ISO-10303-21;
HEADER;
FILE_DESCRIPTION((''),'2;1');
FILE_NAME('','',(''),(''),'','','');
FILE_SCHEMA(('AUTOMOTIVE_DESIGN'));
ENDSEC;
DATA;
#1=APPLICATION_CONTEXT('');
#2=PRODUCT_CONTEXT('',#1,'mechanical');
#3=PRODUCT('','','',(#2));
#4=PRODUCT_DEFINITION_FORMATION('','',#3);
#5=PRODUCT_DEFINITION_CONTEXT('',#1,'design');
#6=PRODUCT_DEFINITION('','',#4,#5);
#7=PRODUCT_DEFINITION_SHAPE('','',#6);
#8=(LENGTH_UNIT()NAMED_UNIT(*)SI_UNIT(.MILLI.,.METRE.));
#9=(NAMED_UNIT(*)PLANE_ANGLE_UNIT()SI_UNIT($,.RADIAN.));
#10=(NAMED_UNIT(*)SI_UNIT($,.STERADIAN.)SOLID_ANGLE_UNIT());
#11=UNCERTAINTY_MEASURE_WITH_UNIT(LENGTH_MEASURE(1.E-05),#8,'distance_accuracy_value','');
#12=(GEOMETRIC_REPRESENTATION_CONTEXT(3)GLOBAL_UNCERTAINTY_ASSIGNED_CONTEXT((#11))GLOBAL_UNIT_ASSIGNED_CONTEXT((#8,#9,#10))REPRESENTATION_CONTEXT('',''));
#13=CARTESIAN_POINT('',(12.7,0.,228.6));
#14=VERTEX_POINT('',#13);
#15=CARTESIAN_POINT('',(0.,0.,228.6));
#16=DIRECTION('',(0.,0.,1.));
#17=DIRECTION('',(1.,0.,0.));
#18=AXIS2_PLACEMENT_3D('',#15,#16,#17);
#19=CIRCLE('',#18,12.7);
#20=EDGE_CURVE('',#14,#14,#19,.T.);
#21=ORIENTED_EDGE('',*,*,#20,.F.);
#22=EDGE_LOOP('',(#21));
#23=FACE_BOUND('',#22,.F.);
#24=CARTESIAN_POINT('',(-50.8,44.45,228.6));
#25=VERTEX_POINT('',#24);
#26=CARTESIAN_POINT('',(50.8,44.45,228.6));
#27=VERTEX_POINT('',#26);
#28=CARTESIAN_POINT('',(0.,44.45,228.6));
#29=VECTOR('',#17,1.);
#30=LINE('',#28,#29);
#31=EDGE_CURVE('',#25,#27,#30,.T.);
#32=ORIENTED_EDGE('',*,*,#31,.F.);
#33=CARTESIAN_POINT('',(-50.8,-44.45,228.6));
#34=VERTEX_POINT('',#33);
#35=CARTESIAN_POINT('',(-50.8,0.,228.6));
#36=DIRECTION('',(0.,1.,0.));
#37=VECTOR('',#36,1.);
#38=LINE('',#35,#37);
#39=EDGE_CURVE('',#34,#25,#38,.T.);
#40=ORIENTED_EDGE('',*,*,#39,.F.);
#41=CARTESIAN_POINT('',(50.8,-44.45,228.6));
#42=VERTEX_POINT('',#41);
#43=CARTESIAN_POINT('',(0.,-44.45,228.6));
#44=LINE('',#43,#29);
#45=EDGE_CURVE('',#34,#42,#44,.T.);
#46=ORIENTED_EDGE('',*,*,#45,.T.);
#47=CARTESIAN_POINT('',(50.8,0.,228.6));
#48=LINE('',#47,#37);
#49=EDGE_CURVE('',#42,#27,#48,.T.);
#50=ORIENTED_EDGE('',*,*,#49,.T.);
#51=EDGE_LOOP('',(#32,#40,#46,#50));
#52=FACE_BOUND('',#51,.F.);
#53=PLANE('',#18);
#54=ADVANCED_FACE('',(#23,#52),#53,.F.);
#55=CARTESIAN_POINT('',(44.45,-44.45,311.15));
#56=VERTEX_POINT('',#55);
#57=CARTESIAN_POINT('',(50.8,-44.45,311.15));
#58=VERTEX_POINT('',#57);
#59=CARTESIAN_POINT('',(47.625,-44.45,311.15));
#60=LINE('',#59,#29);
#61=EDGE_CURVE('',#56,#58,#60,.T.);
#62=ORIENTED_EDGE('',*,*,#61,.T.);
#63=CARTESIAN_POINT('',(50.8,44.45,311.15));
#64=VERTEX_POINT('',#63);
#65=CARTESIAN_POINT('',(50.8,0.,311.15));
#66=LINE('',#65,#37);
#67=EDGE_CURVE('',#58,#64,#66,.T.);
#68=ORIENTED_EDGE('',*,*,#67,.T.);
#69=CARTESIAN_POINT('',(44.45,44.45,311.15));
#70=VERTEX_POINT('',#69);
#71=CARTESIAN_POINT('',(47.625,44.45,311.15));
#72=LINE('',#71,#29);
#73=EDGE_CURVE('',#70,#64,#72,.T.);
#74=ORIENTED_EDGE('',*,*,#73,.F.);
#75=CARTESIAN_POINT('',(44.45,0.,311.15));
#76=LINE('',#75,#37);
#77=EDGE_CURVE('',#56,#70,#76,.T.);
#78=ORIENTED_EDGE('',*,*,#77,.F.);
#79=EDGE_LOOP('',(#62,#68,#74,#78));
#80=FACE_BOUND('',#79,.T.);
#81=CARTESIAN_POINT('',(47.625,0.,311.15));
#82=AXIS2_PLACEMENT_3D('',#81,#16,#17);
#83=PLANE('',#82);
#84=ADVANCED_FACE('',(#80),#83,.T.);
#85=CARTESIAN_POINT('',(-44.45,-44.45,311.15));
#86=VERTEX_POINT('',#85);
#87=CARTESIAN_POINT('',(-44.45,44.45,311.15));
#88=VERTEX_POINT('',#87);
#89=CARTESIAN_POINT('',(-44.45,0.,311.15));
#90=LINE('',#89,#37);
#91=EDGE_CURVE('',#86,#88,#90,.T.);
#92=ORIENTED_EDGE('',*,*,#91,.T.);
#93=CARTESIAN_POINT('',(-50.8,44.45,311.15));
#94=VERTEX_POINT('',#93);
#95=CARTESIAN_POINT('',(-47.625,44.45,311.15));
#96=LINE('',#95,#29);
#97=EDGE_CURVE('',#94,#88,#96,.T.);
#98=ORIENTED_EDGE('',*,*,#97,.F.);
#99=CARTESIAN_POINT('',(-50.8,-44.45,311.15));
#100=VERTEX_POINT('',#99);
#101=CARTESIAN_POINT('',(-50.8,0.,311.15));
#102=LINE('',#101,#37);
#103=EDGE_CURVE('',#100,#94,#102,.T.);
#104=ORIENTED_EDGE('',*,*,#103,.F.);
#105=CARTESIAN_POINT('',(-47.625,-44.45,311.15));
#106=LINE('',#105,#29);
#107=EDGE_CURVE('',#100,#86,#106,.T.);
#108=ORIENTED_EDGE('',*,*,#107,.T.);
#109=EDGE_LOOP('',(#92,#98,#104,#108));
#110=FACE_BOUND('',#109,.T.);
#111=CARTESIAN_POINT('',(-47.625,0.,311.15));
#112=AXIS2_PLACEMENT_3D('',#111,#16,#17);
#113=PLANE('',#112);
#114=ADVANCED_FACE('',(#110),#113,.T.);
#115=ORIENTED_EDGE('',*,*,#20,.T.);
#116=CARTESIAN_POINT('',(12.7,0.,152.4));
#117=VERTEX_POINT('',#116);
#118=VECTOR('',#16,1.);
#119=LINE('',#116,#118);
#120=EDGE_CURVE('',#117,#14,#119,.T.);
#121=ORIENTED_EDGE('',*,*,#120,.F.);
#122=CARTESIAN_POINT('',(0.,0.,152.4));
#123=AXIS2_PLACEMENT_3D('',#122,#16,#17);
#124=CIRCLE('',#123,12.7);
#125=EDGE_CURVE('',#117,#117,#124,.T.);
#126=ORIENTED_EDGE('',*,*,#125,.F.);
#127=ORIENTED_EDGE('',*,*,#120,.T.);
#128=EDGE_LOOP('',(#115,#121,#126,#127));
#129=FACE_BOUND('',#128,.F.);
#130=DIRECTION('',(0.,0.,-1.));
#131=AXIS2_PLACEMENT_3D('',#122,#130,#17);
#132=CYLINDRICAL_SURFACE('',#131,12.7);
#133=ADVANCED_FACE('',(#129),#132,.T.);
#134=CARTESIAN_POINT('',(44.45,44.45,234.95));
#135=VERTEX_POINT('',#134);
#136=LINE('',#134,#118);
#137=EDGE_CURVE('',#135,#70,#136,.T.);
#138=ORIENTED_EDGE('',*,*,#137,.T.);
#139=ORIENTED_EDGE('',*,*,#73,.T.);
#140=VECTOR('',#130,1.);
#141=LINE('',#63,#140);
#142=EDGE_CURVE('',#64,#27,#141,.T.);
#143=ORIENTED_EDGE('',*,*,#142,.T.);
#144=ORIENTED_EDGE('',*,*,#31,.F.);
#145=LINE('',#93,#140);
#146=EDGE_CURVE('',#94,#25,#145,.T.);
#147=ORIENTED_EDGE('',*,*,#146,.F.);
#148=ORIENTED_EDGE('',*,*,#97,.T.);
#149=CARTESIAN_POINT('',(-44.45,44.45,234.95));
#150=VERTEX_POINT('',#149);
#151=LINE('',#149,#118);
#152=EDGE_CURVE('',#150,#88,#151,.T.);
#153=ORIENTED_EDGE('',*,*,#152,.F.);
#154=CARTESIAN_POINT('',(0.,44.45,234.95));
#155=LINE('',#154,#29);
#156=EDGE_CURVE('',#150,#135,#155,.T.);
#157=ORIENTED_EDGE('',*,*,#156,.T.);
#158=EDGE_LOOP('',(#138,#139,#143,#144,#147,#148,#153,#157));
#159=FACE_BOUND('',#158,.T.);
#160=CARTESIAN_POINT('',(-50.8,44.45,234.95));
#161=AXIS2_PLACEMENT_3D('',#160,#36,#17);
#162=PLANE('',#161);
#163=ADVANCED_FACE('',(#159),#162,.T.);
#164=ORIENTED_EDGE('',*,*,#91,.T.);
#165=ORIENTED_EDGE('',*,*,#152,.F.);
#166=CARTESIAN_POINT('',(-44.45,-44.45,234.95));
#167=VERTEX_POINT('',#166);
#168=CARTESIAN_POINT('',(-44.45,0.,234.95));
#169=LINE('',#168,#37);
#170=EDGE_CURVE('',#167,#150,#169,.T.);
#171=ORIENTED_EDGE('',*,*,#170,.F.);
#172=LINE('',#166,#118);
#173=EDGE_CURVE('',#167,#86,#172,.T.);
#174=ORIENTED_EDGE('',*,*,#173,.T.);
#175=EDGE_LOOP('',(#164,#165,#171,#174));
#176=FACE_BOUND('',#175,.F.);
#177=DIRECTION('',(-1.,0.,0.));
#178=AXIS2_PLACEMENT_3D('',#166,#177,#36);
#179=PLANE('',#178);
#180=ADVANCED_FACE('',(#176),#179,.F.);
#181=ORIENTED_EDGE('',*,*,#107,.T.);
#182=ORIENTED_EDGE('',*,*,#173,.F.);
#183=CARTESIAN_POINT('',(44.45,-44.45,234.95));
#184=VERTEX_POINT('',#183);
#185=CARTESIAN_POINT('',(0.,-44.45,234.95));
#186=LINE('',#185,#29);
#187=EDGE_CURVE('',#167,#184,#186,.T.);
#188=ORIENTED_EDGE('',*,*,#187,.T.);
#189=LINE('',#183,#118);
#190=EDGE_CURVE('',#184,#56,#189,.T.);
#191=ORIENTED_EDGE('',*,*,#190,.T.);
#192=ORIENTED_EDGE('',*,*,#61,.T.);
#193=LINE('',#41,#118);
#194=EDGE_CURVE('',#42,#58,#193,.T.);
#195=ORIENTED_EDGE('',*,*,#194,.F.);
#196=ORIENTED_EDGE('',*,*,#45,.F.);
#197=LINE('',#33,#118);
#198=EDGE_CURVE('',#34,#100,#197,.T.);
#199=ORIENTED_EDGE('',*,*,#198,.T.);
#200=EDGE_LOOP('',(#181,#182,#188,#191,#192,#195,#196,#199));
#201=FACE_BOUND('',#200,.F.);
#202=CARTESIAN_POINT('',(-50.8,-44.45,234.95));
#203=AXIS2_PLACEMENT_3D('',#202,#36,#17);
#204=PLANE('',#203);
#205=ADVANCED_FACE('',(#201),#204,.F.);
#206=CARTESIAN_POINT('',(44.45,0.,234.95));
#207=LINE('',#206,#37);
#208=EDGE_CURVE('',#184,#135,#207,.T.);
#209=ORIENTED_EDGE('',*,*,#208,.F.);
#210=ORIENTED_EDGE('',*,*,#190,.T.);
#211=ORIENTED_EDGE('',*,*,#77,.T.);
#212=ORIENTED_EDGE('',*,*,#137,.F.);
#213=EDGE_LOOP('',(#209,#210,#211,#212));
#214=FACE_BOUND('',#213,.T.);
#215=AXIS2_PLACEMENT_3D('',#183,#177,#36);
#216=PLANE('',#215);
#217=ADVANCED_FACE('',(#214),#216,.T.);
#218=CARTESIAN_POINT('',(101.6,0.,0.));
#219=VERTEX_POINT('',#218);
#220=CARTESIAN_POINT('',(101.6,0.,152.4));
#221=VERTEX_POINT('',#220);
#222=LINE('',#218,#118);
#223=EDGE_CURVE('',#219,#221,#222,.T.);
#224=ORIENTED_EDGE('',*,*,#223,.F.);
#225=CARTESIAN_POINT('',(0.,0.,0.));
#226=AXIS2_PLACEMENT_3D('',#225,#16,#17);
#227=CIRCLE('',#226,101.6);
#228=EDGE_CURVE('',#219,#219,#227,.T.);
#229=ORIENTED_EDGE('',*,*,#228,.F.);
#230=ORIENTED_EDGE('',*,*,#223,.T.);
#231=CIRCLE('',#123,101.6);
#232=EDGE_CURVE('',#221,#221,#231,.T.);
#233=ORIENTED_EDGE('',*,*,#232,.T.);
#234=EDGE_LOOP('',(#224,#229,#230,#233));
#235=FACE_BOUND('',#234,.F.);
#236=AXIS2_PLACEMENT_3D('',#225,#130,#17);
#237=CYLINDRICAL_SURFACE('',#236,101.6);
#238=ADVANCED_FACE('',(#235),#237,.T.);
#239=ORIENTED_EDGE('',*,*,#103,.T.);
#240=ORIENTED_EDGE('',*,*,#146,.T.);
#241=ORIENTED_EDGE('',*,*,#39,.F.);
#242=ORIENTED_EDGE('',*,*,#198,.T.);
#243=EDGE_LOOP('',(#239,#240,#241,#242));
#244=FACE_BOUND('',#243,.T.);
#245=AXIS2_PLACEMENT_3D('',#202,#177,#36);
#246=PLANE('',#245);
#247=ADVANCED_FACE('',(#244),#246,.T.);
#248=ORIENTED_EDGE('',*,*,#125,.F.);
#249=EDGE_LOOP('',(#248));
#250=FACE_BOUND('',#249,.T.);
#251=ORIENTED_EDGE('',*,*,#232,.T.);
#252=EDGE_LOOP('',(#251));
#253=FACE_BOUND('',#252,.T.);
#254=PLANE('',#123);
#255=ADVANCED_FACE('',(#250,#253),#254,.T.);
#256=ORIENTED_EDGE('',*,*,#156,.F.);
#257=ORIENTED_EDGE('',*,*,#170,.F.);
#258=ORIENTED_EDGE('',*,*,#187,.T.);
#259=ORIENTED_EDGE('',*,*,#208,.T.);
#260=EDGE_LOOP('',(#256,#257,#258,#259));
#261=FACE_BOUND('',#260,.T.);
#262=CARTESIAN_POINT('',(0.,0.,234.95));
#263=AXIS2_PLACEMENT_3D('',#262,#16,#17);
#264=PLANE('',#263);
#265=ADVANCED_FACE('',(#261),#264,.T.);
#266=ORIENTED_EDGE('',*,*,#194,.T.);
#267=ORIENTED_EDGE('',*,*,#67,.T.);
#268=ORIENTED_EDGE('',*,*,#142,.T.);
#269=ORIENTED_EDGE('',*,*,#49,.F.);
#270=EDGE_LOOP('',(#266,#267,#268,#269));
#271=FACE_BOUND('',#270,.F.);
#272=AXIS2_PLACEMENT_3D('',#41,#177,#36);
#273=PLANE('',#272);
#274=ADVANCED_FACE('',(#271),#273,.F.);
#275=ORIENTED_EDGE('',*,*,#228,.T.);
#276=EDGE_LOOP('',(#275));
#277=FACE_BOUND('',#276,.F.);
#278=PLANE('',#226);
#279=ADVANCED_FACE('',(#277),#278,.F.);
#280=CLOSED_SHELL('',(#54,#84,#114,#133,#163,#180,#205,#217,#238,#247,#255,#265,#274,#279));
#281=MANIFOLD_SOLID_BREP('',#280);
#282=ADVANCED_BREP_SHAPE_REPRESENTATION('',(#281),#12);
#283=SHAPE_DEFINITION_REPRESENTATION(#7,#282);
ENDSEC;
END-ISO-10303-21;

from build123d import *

# Parameters (mm, degrees)
F0_R     = 101.6
F1_DEPTH = 152.4
F2_R     = 12.7
F3_DEPTH = 76.2
F4_W     = 101.6
F4_H     = 88.9
F4_R     = 12.7
F5_DEPTH = 6.35
F6_W     = 6.35
F6_H     = 88.9
F7_DEPTH = 76.2


# Not quite as in the source:
# - a feature names something its author has since deleted; it is built from what else it names


with BuildPart() as f1:
    # F0 (on Top) → F1 (new body)
    with BuildSketch(Plane.XY):
        Circle(F0_R)
    extrude(amount=F1_DEPTH)

    # F2 (on face) → F3 (join)
    with BuildSketch(Plane.XY.offset(152.4)):
        Circle(F2_R)
    extrude(amount=F3_DEPTH)

    # F4 (on face) → F5 (join)
    with BuildSketch(Plane.XY.offset(228.6)):
        Rectangle(F4_W, F4_H)
        Circle(F4_R, mode=Mode.SUBTRACT)
        Circle(F4_R)
    extrude(amount=F5_DEPTH)

    # F6 (on face) → F7 (join)
    with BuildSketch(Plane.XY.offset(234.95)):
        with Locations((-47.625, 0)):
            Rectangle(F6_W, F6_H)
        with Locations((47.625, 0)):
            Rectangle(F6_W, F6_H)
    extrude(amount=F7_DEPTH)


solid = f1.part
